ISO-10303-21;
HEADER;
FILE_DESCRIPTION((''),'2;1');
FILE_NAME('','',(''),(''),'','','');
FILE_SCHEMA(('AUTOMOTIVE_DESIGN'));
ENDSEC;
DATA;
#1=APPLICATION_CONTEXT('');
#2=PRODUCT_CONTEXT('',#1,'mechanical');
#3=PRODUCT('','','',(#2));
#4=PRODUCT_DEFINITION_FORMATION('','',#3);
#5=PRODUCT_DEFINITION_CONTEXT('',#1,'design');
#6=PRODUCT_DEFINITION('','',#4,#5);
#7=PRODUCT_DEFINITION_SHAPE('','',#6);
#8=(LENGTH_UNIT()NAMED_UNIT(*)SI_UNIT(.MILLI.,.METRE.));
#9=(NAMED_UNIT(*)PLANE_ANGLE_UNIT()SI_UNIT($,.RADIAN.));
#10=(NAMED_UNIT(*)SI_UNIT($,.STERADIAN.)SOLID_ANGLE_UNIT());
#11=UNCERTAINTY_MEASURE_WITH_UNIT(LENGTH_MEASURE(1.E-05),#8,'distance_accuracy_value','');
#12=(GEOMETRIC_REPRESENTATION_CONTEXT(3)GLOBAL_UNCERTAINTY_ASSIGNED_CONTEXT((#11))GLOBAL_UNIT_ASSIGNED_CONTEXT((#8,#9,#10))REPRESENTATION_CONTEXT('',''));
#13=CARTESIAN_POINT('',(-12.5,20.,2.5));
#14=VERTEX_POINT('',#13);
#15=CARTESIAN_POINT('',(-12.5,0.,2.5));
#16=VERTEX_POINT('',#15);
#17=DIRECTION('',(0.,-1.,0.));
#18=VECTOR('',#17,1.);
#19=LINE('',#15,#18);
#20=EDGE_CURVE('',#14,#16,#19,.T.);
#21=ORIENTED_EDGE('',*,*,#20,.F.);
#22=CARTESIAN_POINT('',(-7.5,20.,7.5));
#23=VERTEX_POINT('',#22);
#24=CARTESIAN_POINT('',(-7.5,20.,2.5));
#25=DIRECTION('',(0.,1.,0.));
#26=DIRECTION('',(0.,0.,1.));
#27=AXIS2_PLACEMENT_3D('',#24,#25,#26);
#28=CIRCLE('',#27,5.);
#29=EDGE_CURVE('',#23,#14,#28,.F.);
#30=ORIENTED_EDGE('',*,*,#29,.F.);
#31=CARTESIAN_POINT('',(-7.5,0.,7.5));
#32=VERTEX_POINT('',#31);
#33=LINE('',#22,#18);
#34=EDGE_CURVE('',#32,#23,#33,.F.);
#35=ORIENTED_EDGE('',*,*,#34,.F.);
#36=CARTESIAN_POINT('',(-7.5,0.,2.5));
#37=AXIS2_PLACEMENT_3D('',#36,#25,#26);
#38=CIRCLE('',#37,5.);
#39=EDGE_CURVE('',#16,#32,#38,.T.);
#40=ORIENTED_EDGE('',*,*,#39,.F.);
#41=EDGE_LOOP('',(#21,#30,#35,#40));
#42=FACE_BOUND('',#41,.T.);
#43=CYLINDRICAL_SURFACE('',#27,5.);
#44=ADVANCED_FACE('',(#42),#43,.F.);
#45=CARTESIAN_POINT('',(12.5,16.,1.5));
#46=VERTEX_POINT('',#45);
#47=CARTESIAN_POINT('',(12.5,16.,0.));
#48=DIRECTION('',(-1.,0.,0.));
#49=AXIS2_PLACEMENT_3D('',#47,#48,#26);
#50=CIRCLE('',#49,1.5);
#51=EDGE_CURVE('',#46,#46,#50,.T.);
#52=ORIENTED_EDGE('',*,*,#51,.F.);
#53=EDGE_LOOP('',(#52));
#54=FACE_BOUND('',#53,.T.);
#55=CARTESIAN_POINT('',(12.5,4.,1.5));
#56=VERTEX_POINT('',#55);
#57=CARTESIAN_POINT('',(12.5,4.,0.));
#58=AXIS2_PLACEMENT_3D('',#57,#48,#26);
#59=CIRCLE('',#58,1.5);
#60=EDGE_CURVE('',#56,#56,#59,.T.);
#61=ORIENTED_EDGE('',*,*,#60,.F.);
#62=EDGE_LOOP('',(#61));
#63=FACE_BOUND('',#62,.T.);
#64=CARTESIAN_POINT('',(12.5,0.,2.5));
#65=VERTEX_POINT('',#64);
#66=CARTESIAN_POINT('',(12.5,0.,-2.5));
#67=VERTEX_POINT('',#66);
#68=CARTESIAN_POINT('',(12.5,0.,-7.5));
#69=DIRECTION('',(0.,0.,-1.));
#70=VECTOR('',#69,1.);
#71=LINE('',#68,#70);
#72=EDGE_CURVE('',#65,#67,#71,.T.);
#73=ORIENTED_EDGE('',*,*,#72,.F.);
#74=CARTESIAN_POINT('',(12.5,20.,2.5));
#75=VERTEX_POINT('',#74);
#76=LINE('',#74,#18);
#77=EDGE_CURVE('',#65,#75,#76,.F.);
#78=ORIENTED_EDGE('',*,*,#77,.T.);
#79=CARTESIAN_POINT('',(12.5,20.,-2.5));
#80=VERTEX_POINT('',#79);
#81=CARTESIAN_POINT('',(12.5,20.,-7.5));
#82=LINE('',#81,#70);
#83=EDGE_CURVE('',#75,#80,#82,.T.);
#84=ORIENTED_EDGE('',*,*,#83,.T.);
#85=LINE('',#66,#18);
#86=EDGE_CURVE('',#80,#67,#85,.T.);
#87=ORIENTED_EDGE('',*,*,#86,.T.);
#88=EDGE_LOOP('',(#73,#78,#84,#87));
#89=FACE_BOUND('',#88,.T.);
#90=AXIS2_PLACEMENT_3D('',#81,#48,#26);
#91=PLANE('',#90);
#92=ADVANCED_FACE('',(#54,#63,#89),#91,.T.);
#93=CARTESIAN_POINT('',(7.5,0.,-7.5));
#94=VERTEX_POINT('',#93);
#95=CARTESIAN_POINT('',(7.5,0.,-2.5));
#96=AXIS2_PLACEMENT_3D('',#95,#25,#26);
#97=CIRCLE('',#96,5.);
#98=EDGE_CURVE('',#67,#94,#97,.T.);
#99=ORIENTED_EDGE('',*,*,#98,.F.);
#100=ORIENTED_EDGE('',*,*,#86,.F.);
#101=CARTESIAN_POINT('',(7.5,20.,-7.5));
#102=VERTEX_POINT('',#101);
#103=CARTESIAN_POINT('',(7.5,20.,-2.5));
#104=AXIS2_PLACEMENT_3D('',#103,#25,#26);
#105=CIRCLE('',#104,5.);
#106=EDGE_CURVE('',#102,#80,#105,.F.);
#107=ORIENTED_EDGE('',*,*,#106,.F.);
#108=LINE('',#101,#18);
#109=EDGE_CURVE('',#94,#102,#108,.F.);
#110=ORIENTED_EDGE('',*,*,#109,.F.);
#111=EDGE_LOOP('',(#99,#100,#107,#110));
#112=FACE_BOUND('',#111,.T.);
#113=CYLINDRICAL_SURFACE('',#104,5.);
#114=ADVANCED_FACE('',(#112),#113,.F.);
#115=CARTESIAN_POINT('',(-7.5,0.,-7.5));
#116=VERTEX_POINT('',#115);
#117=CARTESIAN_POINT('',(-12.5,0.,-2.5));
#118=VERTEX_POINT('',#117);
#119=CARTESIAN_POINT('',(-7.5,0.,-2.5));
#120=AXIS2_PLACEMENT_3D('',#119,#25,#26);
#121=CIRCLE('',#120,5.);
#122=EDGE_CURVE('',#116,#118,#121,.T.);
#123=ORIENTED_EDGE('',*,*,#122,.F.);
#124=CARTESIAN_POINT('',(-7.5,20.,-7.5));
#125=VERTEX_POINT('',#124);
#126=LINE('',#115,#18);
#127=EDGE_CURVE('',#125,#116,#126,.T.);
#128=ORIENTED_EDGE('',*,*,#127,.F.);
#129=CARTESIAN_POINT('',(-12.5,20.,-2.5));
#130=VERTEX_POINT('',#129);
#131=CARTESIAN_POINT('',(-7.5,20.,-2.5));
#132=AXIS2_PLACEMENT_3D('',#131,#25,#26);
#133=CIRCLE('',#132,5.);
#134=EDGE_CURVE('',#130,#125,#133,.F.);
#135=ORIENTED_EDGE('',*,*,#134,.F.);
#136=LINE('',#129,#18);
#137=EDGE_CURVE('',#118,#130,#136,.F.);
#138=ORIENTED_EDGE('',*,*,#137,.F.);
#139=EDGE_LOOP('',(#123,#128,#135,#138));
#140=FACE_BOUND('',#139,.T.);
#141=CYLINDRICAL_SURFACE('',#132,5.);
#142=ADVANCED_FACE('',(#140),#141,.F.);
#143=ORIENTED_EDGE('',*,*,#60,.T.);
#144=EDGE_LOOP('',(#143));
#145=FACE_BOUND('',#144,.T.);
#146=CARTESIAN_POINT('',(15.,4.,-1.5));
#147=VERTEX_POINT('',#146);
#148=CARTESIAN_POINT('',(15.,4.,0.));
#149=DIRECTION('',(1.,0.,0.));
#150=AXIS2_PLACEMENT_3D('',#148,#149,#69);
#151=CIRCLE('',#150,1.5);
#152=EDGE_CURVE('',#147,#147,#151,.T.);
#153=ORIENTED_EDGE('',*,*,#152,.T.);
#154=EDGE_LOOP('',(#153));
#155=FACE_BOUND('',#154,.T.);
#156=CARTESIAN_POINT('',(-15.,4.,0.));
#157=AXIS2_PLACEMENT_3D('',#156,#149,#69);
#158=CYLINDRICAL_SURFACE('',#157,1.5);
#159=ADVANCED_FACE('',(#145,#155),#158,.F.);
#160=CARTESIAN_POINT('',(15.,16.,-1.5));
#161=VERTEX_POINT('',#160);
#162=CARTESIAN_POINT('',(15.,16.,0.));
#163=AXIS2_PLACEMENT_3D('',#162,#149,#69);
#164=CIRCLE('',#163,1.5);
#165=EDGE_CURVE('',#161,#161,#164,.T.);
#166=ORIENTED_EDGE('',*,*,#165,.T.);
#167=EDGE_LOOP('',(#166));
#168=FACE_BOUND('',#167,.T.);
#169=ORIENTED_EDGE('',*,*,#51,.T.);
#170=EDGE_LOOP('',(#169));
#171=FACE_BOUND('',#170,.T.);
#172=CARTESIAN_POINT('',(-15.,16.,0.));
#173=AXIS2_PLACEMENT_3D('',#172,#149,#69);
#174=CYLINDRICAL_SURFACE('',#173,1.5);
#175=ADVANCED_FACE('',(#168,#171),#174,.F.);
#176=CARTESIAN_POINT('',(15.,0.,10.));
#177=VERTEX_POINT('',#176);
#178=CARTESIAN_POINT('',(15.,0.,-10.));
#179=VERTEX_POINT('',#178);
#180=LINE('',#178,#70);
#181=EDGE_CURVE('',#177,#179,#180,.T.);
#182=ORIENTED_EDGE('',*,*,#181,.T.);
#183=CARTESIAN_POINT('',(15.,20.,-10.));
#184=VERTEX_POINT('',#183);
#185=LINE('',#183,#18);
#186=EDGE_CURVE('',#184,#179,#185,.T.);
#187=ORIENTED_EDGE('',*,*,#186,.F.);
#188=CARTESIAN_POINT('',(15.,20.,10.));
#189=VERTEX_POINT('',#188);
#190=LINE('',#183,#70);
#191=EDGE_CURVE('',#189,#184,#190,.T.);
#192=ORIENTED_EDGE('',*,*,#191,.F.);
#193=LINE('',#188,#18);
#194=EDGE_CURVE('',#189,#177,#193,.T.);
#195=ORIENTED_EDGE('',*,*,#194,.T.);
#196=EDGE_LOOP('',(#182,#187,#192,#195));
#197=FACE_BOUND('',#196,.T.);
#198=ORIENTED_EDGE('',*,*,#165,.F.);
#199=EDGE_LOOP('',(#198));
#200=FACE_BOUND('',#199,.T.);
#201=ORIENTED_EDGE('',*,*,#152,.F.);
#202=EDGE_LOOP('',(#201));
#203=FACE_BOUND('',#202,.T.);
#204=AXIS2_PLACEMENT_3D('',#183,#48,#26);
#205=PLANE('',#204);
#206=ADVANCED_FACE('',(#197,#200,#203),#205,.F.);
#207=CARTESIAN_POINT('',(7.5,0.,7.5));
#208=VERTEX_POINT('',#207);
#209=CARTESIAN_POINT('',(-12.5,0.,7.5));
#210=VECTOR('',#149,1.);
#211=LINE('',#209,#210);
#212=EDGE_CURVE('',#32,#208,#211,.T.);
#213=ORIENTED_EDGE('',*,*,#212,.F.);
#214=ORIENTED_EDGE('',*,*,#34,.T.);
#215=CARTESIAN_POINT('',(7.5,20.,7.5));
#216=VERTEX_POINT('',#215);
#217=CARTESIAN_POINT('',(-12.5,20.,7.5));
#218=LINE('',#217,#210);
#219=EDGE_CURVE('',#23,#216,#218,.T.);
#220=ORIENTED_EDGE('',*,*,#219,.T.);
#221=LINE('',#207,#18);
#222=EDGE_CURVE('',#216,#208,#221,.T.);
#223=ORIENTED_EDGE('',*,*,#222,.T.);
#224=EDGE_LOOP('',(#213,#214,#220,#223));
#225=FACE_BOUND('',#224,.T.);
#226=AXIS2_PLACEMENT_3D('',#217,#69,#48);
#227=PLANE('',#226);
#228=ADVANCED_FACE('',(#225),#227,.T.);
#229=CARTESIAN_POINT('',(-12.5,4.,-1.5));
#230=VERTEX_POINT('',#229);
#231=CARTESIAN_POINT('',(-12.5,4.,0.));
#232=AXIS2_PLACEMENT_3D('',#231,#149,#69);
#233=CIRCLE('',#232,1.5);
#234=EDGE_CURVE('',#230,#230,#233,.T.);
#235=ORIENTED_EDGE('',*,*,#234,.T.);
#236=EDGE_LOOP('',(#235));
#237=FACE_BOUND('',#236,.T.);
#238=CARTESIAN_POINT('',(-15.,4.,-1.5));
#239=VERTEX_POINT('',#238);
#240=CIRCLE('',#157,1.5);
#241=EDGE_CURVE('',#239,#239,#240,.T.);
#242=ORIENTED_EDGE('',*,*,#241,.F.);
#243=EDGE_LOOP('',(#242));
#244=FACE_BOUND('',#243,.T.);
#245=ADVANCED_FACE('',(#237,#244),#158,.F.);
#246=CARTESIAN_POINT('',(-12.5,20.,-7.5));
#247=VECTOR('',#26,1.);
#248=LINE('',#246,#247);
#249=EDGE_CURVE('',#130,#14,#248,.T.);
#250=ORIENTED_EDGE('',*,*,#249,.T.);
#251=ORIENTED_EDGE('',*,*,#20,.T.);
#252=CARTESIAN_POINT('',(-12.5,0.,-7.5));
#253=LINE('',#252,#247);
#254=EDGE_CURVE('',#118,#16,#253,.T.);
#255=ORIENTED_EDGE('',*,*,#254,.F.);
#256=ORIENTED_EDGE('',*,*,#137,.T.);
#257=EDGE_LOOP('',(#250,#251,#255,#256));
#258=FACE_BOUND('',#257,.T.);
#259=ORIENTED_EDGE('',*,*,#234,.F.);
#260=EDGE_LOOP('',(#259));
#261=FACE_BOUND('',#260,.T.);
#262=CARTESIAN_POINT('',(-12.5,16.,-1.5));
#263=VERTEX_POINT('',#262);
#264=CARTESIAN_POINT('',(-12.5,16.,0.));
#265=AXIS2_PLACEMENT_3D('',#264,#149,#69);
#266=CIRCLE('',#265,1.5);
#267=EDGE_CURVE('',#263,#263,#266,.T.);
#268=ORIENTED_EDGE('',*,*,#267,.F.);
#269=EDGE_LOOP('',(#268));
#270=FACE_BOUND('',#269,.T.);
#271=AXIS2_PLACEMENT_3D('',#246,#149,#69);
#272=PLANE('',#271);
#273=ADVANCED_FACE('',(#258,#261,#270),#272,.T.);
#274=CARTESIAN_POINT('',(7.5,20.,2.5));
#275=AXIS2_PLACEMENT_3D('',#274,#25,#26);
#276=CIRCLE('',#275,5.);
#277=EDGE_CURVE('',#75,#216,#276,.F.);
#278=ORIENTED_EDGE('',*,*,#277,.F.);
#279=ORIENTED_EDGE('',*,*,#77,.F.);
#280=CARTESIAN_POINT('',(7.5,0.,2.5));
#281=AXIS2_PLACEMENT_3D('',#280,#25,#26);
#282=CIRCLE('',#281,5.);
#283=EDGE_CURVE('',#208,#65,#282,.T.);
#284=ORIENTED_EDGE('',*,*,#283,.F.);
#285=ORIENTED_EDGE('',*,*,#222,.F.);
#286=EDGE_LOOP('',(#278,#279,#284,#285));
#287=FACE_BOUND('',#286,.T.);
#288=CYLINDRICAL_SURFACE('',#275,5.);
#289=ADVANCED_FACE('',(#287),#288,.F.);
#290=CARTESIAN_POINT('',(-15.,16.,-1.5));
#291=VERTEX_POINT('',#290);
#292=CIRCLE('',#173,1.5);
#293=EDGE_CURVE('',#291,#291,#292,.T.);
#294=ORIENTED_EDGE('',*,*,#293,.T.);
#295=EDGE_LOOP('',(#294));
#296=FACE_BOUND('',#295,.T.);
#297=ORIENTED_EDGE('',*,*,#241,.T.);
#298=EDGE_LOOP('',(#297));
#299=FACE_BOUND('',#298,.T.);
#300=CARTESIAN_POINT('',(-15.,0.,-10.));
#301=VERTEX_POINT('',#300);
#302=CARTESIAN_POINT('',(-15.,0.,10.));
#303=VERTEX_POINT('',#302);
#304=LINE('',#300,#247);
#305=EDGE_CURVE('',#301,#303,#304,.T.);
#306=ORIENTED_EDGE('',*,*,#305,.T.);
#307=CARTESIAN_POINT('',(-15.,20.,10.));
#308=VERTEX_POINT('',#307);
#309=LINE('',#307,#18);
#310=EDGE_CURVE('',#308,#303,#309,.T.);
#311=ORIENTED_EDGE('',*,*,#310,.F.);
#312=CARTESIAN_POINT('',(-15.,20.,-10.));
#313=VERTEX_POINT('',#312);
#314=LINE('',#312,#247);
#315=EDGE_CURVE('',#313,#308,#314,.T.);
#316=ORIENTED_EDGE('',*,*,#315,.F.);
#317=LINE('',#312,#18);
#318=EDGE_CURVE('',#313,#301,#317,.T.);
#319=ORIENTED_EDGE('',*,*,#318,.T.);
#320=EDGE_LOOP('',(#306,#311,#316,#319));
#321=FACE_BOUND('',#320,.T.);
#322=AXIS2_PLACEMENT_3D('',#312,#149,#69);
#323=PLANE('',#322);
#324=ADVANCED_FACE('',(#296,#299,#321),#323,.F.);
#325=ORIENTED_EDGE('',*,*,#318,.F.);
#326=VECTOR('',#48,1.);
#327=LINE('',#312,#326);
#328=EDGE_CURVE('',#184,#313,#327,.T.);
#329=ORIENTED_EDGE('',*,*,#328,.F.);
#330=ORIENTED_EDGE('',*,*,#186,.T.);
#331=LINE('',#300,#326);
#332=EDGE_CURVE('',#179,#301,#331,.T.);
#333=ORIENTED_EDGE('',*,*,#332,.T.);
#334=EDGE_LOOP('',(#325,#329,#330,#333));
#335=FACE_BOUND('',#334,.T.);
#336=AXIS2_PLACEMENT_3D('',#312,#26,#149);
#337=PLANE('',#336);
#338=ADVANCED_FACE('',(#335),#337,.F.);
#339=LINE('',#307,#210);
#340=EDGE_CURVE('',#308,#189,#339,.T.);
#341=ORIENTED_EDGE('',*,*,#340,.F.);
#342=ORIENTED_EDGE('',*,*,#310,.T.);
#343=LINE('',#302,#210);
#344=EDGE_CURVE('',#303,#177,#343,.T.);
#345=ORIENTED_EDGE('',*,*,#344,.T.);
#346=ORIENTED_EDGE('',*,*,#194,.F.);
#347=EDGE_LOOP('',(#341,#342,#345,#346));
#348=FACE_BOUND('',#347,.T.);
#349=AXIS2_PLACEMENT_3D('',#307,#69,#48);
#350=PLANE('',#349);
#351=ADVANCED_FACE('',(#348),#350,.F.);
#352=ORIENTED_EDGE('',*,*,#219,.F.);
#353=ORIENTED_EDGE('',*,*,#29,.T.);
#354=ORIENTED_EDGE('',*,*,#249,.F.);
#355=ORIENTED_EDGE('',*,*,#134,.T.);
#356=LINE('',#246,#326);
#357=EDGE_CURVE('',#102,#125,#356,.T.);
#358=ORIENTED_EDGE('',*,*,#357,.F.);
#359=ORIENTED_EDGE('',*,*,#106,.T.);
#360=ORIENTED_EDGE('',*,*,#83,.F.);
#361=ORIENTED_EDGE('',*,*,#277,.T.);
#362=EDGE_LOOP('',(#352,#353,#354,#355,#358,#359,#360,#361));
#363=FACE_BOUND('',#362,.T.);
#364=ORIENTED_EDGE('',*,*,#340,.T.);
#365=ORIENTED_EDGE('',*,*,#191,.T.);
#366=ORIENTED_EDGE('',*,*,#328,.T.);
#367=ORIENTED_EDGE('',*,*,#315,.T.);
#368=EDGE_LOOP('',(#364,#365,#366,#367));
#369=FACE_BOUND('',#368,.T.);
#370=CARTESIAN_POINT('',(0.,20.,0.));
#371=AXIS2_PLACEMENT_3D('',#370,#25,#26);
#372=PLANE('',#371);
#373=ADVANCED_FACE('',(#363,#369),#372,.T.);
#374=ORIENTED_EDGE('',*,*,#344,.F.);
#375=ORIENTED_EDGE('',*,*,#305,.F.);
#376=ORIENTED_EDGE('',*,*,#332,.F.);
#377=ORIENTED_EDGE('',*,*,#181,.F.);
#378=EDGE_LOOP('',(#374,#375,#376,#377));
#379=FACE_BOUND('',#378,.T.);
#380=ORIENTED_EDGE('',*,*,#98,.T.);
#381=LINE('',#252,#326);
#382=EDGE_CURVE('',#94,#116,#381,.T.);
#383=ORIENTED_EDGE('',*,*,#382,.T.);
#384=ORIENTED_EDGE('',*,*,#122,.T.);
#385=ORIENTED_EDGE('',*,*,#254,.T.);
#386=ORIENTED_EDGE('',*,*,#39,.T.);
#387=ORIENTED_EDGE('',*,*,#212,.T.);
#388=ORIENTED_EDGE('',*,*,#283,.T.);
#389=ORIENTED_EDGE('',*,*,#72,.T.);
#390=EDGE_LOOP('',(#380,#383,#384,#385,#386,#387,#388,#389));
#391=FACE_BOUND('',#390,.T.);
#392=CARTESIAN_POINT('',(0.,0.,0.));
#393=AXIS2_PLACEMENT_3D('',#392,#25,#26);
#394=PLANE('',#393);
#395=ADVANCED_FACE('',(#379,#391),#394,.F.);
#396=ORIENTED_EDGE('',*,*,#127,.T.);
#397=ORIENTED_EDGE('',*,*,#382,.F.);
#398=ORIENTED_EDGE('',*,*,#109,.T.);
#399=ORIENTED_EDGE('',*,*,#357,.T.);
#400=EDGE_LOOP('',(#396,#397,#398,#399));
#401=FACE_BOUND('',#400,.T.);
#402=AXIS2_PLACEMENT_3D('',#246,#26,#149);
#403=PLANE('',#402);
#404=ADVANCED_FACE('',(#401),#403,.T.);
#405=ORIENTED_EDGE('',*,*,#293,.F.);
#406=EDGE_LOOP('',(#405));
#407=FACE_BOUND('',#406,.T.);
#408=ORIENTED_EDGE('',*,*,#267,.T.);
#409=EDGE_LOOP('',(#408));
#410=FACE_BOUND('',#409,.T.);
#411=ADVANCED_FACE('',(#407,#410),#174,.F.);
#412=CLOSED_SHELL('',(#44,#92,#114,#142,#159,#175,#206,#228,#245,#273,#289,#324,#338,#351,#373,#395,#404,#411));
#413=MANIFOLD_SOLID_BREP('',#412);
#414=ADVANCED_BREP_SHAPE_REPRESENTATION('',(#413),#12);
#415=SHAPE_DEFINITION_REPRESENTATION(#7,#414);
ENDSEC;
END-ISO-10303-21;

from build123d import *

# Parameters (mm, degrees)
BOSS_EXTRUDE1_OUTLINE_W   = 30
BOSS_EXTRUDE1_OUTLINE_H   = 20
BOSS_EXTRUDE1_OUTLINE_W_2 = 25
BOSS_EXTRUDE1_OUTLINE_H_2 = 15
BOSS_EXTRUDE1_DEPTH       = 20
SKETCH4_R                 = 1.5
CUT_EXTRUDE3_DEPTH        = 38.416573868
FILLET1_R                 = 5


# Read off the part's stored shape, not the designer's step: Boss-Extrude1
with BuildPart() as part:
    # Boss-Extrude1 outline → Boss-Extrude1 (new body)
    with BuildSketch(Plane(origin=(0, 0, 0), x_dir=(1, 0, 0), z_dir=(0, 1, 0))):
        Rectangle(BOSS_EXTRUDE1_OUTLINE_W, BOSS_EXTRUDE1_OUTLINE_H)
        Rectangle(BOSS_EXTRUDE1_OUTLINE_W_2, BOSS_EXTRUDE1_OUTLINE_H_2, mode=Mode.SUBTRACT)
    extrude(amount=BOSS_EXTRUDE1_DEPTH)

    # Sketch4 → Cut-Extrude3 (cut, through all)
    with BuildSketch(Plane(origin=(15, 0, 0), x_dir=(0, 0, -1), z_dir=(1, 0, 0))):
        with Locations((0, 16)):
            Circle(SKETCH4_R)
        with Locations((0, 4)):
            Circle(SKETCH4_R)
    extrude(amount=-CUT_EXTRUDE3_DEPTH, mode=Mode.SUBTRACT)

    # Fillet1
    fillet1_edges = [part.edges().sort_by_distance(p)[0] for p in [
        (12.5, 10, 7.5),
        (12.5, 10, -7.5),
        (-12.5, 10, -7.5),
        (-12.5, 10, 7.5),
    ]]
    fillet(fillet1_edges, radius=FILLET1_R)


solid = part.part
